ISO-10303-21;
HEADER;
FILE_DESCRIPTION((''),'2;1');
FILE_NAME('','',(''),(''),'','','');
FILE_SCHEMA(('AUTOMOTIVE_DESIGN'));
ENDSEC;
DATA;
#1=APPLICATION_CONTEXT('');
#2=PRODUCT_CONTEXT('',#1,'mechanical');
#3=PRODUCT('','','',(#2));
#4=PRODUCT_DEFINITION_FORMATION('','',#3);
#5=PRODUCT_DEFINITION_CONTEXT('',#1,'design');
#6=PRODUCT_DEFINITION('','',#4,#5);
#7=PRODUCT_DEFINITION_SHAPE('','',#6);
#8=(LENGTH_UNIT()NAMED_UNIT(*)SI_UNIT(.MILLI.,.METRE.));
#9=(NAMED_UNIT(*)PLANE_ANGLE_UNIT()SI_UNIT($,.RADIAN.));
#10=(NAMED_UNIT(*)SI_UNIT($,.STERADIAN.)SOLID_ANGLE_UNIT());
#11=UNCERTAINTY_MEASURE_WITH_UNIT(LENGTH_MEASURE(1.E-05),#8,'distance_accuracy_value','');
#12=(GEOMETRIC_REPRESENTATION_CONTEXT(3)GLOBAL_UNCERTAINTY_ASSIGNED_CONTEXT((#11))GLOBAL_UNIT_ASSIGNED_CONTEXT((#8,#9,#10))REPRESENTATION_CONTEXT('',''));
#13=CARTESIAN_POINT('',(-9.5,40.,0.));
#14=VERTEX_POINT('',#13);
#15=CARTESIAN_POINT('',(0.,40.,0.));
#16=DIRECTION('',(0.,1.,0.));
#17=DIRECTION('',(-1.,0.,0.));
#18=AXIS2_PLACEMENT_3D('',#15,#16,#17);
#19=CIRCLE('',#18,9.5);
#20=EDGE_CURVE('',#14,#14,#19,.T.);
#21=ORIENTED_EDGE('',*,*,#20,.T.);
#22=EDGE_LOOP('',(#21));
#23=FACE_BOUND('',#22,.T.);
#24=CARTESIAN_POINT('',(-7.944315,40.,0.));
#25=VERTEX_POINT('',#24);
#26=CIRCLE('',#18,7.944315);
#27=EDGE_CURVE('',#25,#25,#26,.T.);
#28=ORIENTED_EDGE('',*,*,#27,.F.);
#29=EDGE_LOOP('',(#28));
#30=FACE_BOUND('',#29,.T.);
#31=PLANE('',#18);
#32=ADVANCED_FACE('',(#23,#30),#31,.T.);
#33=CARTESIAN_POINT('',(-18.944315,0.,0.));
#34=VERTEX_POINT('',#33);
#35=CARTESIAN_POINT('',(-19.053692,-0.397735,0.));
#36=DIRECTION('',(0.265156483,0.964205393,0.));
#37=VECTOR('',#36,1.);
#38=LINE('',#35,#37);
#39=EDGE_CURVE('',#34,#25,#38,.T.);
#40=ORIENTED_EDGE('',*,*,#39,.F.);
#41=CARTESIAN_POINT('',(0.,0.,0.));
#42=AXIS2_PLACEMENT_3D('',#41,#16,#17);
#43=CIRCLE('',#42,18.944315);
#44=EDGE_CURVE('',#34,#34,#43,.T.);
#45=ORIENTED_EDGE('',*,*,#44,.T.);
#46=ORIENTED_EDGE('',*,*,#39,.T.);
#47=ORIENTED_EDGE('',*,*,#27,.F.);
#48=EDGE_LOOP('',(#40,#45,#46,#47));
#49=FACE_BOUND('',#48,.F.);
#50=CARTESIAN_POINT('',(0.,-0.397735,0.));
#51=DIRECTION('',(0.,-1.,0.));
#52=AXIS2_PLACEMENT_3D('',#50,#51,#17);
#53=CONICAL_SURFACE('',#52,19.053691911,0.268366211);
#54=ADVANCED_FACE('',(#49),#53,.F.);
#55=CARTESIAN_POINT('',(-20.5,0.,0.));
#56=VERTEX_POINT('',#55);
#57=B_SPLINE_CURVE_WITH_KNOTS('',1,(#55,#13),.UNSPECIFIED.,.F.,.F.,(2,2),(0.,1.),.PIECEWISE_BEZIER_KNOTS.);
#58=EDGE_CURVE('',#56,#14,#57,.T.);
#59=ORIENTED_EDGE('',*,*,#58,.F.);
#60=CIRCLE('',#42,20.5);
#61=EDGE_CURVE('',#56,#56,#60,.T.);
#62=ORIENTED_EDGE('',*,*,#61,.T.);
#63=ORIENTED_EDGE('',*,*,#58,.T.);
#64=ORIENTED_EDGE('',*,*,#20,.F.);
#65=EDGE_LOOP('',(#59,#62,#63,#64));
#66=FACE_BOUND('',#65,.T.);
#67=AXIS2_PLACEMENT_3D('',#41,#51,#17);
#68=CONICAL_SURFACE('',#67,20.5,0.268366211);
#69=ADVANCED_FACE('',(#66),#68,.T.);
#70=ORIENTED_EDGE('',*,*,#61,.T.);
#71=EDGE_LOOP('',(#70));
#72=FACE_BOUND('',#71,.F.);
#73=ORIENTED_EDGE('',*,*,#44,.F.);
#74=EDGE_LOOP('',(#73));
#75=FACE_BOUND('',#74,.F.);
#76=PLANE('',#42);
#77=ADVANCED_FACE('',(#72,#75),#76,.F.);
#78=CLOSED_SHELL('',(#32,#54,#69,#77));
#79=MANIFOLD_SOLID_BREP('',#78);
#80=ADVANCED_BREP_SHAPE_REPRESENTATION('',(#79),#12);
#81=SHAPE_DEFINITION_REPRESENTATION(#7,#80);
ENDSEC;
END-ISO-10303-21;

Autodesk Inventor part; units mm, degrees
ref_plane "YZ Plane" through (0, 0, 0) normal (1, 0, 0) x (0, 1, 0)
ref_plane "XY Plane" through (0, 0, 0) normal (0, 0, 1) x (1, 0, 0)
sketch "Szkic6" plane through (0, 0, 0) normal (0, 1, 0) x (-1, 0, 0)
  circle A0 centre (0, 0) radius 20.5
  dimension "d33" = 41
ref_plane "Płaszczyzna konstrukcyjna1" through (0, 40, 0) normal (0, 1, 0) x (-1, 0, 0)
sketch "Szkic7" plane through (0, 40, 0) normal (0, 1, 0) x (-1, 0, 0)
  circle A0 centre (0, 0) radius 9.5
  dimension "d35" = 19
loft "Wyciągnięcie złożone1" add profiles "Szkic6", "Szkic7"
shell "Skorupa1" thickness 1.5 removed faces 2 at (0.3595, 40, 2.9609) at (-3.5154, 0, 4.1371)
equation "\"d33\" = OD1"
equation "\"d35\" = OD2"
equation "\"d52\" = THK"
equation "\"SzerokośćGięciaPodcięcia\" = Grubość"
equation "\"RozmiarPodcięciaNarożnika\" = 4 * Grubość"
equation "\"PromieńPrzejścia\" = PromieńGięcia"
equation "\"Rozmiar_promienia_Jacobiego\" = PromieńGięcia"
equation "\"Wielk_odstępu\" = Grubość"
equation "\"d2\" = PromieńGięcia"
equation "\"d23\" = PromieńGięcia"
equation "\"OD1\" = 41"
equation "\"OD2\" = 19"
equation "\"THK\" = 1.5"
equation "\"Grubość\" = 1.5"
equation "\"PromieńGięcia\" = 3"
properties part number "Redukcja symetryczna Ø41x19x1,5 L=40" material "304"
